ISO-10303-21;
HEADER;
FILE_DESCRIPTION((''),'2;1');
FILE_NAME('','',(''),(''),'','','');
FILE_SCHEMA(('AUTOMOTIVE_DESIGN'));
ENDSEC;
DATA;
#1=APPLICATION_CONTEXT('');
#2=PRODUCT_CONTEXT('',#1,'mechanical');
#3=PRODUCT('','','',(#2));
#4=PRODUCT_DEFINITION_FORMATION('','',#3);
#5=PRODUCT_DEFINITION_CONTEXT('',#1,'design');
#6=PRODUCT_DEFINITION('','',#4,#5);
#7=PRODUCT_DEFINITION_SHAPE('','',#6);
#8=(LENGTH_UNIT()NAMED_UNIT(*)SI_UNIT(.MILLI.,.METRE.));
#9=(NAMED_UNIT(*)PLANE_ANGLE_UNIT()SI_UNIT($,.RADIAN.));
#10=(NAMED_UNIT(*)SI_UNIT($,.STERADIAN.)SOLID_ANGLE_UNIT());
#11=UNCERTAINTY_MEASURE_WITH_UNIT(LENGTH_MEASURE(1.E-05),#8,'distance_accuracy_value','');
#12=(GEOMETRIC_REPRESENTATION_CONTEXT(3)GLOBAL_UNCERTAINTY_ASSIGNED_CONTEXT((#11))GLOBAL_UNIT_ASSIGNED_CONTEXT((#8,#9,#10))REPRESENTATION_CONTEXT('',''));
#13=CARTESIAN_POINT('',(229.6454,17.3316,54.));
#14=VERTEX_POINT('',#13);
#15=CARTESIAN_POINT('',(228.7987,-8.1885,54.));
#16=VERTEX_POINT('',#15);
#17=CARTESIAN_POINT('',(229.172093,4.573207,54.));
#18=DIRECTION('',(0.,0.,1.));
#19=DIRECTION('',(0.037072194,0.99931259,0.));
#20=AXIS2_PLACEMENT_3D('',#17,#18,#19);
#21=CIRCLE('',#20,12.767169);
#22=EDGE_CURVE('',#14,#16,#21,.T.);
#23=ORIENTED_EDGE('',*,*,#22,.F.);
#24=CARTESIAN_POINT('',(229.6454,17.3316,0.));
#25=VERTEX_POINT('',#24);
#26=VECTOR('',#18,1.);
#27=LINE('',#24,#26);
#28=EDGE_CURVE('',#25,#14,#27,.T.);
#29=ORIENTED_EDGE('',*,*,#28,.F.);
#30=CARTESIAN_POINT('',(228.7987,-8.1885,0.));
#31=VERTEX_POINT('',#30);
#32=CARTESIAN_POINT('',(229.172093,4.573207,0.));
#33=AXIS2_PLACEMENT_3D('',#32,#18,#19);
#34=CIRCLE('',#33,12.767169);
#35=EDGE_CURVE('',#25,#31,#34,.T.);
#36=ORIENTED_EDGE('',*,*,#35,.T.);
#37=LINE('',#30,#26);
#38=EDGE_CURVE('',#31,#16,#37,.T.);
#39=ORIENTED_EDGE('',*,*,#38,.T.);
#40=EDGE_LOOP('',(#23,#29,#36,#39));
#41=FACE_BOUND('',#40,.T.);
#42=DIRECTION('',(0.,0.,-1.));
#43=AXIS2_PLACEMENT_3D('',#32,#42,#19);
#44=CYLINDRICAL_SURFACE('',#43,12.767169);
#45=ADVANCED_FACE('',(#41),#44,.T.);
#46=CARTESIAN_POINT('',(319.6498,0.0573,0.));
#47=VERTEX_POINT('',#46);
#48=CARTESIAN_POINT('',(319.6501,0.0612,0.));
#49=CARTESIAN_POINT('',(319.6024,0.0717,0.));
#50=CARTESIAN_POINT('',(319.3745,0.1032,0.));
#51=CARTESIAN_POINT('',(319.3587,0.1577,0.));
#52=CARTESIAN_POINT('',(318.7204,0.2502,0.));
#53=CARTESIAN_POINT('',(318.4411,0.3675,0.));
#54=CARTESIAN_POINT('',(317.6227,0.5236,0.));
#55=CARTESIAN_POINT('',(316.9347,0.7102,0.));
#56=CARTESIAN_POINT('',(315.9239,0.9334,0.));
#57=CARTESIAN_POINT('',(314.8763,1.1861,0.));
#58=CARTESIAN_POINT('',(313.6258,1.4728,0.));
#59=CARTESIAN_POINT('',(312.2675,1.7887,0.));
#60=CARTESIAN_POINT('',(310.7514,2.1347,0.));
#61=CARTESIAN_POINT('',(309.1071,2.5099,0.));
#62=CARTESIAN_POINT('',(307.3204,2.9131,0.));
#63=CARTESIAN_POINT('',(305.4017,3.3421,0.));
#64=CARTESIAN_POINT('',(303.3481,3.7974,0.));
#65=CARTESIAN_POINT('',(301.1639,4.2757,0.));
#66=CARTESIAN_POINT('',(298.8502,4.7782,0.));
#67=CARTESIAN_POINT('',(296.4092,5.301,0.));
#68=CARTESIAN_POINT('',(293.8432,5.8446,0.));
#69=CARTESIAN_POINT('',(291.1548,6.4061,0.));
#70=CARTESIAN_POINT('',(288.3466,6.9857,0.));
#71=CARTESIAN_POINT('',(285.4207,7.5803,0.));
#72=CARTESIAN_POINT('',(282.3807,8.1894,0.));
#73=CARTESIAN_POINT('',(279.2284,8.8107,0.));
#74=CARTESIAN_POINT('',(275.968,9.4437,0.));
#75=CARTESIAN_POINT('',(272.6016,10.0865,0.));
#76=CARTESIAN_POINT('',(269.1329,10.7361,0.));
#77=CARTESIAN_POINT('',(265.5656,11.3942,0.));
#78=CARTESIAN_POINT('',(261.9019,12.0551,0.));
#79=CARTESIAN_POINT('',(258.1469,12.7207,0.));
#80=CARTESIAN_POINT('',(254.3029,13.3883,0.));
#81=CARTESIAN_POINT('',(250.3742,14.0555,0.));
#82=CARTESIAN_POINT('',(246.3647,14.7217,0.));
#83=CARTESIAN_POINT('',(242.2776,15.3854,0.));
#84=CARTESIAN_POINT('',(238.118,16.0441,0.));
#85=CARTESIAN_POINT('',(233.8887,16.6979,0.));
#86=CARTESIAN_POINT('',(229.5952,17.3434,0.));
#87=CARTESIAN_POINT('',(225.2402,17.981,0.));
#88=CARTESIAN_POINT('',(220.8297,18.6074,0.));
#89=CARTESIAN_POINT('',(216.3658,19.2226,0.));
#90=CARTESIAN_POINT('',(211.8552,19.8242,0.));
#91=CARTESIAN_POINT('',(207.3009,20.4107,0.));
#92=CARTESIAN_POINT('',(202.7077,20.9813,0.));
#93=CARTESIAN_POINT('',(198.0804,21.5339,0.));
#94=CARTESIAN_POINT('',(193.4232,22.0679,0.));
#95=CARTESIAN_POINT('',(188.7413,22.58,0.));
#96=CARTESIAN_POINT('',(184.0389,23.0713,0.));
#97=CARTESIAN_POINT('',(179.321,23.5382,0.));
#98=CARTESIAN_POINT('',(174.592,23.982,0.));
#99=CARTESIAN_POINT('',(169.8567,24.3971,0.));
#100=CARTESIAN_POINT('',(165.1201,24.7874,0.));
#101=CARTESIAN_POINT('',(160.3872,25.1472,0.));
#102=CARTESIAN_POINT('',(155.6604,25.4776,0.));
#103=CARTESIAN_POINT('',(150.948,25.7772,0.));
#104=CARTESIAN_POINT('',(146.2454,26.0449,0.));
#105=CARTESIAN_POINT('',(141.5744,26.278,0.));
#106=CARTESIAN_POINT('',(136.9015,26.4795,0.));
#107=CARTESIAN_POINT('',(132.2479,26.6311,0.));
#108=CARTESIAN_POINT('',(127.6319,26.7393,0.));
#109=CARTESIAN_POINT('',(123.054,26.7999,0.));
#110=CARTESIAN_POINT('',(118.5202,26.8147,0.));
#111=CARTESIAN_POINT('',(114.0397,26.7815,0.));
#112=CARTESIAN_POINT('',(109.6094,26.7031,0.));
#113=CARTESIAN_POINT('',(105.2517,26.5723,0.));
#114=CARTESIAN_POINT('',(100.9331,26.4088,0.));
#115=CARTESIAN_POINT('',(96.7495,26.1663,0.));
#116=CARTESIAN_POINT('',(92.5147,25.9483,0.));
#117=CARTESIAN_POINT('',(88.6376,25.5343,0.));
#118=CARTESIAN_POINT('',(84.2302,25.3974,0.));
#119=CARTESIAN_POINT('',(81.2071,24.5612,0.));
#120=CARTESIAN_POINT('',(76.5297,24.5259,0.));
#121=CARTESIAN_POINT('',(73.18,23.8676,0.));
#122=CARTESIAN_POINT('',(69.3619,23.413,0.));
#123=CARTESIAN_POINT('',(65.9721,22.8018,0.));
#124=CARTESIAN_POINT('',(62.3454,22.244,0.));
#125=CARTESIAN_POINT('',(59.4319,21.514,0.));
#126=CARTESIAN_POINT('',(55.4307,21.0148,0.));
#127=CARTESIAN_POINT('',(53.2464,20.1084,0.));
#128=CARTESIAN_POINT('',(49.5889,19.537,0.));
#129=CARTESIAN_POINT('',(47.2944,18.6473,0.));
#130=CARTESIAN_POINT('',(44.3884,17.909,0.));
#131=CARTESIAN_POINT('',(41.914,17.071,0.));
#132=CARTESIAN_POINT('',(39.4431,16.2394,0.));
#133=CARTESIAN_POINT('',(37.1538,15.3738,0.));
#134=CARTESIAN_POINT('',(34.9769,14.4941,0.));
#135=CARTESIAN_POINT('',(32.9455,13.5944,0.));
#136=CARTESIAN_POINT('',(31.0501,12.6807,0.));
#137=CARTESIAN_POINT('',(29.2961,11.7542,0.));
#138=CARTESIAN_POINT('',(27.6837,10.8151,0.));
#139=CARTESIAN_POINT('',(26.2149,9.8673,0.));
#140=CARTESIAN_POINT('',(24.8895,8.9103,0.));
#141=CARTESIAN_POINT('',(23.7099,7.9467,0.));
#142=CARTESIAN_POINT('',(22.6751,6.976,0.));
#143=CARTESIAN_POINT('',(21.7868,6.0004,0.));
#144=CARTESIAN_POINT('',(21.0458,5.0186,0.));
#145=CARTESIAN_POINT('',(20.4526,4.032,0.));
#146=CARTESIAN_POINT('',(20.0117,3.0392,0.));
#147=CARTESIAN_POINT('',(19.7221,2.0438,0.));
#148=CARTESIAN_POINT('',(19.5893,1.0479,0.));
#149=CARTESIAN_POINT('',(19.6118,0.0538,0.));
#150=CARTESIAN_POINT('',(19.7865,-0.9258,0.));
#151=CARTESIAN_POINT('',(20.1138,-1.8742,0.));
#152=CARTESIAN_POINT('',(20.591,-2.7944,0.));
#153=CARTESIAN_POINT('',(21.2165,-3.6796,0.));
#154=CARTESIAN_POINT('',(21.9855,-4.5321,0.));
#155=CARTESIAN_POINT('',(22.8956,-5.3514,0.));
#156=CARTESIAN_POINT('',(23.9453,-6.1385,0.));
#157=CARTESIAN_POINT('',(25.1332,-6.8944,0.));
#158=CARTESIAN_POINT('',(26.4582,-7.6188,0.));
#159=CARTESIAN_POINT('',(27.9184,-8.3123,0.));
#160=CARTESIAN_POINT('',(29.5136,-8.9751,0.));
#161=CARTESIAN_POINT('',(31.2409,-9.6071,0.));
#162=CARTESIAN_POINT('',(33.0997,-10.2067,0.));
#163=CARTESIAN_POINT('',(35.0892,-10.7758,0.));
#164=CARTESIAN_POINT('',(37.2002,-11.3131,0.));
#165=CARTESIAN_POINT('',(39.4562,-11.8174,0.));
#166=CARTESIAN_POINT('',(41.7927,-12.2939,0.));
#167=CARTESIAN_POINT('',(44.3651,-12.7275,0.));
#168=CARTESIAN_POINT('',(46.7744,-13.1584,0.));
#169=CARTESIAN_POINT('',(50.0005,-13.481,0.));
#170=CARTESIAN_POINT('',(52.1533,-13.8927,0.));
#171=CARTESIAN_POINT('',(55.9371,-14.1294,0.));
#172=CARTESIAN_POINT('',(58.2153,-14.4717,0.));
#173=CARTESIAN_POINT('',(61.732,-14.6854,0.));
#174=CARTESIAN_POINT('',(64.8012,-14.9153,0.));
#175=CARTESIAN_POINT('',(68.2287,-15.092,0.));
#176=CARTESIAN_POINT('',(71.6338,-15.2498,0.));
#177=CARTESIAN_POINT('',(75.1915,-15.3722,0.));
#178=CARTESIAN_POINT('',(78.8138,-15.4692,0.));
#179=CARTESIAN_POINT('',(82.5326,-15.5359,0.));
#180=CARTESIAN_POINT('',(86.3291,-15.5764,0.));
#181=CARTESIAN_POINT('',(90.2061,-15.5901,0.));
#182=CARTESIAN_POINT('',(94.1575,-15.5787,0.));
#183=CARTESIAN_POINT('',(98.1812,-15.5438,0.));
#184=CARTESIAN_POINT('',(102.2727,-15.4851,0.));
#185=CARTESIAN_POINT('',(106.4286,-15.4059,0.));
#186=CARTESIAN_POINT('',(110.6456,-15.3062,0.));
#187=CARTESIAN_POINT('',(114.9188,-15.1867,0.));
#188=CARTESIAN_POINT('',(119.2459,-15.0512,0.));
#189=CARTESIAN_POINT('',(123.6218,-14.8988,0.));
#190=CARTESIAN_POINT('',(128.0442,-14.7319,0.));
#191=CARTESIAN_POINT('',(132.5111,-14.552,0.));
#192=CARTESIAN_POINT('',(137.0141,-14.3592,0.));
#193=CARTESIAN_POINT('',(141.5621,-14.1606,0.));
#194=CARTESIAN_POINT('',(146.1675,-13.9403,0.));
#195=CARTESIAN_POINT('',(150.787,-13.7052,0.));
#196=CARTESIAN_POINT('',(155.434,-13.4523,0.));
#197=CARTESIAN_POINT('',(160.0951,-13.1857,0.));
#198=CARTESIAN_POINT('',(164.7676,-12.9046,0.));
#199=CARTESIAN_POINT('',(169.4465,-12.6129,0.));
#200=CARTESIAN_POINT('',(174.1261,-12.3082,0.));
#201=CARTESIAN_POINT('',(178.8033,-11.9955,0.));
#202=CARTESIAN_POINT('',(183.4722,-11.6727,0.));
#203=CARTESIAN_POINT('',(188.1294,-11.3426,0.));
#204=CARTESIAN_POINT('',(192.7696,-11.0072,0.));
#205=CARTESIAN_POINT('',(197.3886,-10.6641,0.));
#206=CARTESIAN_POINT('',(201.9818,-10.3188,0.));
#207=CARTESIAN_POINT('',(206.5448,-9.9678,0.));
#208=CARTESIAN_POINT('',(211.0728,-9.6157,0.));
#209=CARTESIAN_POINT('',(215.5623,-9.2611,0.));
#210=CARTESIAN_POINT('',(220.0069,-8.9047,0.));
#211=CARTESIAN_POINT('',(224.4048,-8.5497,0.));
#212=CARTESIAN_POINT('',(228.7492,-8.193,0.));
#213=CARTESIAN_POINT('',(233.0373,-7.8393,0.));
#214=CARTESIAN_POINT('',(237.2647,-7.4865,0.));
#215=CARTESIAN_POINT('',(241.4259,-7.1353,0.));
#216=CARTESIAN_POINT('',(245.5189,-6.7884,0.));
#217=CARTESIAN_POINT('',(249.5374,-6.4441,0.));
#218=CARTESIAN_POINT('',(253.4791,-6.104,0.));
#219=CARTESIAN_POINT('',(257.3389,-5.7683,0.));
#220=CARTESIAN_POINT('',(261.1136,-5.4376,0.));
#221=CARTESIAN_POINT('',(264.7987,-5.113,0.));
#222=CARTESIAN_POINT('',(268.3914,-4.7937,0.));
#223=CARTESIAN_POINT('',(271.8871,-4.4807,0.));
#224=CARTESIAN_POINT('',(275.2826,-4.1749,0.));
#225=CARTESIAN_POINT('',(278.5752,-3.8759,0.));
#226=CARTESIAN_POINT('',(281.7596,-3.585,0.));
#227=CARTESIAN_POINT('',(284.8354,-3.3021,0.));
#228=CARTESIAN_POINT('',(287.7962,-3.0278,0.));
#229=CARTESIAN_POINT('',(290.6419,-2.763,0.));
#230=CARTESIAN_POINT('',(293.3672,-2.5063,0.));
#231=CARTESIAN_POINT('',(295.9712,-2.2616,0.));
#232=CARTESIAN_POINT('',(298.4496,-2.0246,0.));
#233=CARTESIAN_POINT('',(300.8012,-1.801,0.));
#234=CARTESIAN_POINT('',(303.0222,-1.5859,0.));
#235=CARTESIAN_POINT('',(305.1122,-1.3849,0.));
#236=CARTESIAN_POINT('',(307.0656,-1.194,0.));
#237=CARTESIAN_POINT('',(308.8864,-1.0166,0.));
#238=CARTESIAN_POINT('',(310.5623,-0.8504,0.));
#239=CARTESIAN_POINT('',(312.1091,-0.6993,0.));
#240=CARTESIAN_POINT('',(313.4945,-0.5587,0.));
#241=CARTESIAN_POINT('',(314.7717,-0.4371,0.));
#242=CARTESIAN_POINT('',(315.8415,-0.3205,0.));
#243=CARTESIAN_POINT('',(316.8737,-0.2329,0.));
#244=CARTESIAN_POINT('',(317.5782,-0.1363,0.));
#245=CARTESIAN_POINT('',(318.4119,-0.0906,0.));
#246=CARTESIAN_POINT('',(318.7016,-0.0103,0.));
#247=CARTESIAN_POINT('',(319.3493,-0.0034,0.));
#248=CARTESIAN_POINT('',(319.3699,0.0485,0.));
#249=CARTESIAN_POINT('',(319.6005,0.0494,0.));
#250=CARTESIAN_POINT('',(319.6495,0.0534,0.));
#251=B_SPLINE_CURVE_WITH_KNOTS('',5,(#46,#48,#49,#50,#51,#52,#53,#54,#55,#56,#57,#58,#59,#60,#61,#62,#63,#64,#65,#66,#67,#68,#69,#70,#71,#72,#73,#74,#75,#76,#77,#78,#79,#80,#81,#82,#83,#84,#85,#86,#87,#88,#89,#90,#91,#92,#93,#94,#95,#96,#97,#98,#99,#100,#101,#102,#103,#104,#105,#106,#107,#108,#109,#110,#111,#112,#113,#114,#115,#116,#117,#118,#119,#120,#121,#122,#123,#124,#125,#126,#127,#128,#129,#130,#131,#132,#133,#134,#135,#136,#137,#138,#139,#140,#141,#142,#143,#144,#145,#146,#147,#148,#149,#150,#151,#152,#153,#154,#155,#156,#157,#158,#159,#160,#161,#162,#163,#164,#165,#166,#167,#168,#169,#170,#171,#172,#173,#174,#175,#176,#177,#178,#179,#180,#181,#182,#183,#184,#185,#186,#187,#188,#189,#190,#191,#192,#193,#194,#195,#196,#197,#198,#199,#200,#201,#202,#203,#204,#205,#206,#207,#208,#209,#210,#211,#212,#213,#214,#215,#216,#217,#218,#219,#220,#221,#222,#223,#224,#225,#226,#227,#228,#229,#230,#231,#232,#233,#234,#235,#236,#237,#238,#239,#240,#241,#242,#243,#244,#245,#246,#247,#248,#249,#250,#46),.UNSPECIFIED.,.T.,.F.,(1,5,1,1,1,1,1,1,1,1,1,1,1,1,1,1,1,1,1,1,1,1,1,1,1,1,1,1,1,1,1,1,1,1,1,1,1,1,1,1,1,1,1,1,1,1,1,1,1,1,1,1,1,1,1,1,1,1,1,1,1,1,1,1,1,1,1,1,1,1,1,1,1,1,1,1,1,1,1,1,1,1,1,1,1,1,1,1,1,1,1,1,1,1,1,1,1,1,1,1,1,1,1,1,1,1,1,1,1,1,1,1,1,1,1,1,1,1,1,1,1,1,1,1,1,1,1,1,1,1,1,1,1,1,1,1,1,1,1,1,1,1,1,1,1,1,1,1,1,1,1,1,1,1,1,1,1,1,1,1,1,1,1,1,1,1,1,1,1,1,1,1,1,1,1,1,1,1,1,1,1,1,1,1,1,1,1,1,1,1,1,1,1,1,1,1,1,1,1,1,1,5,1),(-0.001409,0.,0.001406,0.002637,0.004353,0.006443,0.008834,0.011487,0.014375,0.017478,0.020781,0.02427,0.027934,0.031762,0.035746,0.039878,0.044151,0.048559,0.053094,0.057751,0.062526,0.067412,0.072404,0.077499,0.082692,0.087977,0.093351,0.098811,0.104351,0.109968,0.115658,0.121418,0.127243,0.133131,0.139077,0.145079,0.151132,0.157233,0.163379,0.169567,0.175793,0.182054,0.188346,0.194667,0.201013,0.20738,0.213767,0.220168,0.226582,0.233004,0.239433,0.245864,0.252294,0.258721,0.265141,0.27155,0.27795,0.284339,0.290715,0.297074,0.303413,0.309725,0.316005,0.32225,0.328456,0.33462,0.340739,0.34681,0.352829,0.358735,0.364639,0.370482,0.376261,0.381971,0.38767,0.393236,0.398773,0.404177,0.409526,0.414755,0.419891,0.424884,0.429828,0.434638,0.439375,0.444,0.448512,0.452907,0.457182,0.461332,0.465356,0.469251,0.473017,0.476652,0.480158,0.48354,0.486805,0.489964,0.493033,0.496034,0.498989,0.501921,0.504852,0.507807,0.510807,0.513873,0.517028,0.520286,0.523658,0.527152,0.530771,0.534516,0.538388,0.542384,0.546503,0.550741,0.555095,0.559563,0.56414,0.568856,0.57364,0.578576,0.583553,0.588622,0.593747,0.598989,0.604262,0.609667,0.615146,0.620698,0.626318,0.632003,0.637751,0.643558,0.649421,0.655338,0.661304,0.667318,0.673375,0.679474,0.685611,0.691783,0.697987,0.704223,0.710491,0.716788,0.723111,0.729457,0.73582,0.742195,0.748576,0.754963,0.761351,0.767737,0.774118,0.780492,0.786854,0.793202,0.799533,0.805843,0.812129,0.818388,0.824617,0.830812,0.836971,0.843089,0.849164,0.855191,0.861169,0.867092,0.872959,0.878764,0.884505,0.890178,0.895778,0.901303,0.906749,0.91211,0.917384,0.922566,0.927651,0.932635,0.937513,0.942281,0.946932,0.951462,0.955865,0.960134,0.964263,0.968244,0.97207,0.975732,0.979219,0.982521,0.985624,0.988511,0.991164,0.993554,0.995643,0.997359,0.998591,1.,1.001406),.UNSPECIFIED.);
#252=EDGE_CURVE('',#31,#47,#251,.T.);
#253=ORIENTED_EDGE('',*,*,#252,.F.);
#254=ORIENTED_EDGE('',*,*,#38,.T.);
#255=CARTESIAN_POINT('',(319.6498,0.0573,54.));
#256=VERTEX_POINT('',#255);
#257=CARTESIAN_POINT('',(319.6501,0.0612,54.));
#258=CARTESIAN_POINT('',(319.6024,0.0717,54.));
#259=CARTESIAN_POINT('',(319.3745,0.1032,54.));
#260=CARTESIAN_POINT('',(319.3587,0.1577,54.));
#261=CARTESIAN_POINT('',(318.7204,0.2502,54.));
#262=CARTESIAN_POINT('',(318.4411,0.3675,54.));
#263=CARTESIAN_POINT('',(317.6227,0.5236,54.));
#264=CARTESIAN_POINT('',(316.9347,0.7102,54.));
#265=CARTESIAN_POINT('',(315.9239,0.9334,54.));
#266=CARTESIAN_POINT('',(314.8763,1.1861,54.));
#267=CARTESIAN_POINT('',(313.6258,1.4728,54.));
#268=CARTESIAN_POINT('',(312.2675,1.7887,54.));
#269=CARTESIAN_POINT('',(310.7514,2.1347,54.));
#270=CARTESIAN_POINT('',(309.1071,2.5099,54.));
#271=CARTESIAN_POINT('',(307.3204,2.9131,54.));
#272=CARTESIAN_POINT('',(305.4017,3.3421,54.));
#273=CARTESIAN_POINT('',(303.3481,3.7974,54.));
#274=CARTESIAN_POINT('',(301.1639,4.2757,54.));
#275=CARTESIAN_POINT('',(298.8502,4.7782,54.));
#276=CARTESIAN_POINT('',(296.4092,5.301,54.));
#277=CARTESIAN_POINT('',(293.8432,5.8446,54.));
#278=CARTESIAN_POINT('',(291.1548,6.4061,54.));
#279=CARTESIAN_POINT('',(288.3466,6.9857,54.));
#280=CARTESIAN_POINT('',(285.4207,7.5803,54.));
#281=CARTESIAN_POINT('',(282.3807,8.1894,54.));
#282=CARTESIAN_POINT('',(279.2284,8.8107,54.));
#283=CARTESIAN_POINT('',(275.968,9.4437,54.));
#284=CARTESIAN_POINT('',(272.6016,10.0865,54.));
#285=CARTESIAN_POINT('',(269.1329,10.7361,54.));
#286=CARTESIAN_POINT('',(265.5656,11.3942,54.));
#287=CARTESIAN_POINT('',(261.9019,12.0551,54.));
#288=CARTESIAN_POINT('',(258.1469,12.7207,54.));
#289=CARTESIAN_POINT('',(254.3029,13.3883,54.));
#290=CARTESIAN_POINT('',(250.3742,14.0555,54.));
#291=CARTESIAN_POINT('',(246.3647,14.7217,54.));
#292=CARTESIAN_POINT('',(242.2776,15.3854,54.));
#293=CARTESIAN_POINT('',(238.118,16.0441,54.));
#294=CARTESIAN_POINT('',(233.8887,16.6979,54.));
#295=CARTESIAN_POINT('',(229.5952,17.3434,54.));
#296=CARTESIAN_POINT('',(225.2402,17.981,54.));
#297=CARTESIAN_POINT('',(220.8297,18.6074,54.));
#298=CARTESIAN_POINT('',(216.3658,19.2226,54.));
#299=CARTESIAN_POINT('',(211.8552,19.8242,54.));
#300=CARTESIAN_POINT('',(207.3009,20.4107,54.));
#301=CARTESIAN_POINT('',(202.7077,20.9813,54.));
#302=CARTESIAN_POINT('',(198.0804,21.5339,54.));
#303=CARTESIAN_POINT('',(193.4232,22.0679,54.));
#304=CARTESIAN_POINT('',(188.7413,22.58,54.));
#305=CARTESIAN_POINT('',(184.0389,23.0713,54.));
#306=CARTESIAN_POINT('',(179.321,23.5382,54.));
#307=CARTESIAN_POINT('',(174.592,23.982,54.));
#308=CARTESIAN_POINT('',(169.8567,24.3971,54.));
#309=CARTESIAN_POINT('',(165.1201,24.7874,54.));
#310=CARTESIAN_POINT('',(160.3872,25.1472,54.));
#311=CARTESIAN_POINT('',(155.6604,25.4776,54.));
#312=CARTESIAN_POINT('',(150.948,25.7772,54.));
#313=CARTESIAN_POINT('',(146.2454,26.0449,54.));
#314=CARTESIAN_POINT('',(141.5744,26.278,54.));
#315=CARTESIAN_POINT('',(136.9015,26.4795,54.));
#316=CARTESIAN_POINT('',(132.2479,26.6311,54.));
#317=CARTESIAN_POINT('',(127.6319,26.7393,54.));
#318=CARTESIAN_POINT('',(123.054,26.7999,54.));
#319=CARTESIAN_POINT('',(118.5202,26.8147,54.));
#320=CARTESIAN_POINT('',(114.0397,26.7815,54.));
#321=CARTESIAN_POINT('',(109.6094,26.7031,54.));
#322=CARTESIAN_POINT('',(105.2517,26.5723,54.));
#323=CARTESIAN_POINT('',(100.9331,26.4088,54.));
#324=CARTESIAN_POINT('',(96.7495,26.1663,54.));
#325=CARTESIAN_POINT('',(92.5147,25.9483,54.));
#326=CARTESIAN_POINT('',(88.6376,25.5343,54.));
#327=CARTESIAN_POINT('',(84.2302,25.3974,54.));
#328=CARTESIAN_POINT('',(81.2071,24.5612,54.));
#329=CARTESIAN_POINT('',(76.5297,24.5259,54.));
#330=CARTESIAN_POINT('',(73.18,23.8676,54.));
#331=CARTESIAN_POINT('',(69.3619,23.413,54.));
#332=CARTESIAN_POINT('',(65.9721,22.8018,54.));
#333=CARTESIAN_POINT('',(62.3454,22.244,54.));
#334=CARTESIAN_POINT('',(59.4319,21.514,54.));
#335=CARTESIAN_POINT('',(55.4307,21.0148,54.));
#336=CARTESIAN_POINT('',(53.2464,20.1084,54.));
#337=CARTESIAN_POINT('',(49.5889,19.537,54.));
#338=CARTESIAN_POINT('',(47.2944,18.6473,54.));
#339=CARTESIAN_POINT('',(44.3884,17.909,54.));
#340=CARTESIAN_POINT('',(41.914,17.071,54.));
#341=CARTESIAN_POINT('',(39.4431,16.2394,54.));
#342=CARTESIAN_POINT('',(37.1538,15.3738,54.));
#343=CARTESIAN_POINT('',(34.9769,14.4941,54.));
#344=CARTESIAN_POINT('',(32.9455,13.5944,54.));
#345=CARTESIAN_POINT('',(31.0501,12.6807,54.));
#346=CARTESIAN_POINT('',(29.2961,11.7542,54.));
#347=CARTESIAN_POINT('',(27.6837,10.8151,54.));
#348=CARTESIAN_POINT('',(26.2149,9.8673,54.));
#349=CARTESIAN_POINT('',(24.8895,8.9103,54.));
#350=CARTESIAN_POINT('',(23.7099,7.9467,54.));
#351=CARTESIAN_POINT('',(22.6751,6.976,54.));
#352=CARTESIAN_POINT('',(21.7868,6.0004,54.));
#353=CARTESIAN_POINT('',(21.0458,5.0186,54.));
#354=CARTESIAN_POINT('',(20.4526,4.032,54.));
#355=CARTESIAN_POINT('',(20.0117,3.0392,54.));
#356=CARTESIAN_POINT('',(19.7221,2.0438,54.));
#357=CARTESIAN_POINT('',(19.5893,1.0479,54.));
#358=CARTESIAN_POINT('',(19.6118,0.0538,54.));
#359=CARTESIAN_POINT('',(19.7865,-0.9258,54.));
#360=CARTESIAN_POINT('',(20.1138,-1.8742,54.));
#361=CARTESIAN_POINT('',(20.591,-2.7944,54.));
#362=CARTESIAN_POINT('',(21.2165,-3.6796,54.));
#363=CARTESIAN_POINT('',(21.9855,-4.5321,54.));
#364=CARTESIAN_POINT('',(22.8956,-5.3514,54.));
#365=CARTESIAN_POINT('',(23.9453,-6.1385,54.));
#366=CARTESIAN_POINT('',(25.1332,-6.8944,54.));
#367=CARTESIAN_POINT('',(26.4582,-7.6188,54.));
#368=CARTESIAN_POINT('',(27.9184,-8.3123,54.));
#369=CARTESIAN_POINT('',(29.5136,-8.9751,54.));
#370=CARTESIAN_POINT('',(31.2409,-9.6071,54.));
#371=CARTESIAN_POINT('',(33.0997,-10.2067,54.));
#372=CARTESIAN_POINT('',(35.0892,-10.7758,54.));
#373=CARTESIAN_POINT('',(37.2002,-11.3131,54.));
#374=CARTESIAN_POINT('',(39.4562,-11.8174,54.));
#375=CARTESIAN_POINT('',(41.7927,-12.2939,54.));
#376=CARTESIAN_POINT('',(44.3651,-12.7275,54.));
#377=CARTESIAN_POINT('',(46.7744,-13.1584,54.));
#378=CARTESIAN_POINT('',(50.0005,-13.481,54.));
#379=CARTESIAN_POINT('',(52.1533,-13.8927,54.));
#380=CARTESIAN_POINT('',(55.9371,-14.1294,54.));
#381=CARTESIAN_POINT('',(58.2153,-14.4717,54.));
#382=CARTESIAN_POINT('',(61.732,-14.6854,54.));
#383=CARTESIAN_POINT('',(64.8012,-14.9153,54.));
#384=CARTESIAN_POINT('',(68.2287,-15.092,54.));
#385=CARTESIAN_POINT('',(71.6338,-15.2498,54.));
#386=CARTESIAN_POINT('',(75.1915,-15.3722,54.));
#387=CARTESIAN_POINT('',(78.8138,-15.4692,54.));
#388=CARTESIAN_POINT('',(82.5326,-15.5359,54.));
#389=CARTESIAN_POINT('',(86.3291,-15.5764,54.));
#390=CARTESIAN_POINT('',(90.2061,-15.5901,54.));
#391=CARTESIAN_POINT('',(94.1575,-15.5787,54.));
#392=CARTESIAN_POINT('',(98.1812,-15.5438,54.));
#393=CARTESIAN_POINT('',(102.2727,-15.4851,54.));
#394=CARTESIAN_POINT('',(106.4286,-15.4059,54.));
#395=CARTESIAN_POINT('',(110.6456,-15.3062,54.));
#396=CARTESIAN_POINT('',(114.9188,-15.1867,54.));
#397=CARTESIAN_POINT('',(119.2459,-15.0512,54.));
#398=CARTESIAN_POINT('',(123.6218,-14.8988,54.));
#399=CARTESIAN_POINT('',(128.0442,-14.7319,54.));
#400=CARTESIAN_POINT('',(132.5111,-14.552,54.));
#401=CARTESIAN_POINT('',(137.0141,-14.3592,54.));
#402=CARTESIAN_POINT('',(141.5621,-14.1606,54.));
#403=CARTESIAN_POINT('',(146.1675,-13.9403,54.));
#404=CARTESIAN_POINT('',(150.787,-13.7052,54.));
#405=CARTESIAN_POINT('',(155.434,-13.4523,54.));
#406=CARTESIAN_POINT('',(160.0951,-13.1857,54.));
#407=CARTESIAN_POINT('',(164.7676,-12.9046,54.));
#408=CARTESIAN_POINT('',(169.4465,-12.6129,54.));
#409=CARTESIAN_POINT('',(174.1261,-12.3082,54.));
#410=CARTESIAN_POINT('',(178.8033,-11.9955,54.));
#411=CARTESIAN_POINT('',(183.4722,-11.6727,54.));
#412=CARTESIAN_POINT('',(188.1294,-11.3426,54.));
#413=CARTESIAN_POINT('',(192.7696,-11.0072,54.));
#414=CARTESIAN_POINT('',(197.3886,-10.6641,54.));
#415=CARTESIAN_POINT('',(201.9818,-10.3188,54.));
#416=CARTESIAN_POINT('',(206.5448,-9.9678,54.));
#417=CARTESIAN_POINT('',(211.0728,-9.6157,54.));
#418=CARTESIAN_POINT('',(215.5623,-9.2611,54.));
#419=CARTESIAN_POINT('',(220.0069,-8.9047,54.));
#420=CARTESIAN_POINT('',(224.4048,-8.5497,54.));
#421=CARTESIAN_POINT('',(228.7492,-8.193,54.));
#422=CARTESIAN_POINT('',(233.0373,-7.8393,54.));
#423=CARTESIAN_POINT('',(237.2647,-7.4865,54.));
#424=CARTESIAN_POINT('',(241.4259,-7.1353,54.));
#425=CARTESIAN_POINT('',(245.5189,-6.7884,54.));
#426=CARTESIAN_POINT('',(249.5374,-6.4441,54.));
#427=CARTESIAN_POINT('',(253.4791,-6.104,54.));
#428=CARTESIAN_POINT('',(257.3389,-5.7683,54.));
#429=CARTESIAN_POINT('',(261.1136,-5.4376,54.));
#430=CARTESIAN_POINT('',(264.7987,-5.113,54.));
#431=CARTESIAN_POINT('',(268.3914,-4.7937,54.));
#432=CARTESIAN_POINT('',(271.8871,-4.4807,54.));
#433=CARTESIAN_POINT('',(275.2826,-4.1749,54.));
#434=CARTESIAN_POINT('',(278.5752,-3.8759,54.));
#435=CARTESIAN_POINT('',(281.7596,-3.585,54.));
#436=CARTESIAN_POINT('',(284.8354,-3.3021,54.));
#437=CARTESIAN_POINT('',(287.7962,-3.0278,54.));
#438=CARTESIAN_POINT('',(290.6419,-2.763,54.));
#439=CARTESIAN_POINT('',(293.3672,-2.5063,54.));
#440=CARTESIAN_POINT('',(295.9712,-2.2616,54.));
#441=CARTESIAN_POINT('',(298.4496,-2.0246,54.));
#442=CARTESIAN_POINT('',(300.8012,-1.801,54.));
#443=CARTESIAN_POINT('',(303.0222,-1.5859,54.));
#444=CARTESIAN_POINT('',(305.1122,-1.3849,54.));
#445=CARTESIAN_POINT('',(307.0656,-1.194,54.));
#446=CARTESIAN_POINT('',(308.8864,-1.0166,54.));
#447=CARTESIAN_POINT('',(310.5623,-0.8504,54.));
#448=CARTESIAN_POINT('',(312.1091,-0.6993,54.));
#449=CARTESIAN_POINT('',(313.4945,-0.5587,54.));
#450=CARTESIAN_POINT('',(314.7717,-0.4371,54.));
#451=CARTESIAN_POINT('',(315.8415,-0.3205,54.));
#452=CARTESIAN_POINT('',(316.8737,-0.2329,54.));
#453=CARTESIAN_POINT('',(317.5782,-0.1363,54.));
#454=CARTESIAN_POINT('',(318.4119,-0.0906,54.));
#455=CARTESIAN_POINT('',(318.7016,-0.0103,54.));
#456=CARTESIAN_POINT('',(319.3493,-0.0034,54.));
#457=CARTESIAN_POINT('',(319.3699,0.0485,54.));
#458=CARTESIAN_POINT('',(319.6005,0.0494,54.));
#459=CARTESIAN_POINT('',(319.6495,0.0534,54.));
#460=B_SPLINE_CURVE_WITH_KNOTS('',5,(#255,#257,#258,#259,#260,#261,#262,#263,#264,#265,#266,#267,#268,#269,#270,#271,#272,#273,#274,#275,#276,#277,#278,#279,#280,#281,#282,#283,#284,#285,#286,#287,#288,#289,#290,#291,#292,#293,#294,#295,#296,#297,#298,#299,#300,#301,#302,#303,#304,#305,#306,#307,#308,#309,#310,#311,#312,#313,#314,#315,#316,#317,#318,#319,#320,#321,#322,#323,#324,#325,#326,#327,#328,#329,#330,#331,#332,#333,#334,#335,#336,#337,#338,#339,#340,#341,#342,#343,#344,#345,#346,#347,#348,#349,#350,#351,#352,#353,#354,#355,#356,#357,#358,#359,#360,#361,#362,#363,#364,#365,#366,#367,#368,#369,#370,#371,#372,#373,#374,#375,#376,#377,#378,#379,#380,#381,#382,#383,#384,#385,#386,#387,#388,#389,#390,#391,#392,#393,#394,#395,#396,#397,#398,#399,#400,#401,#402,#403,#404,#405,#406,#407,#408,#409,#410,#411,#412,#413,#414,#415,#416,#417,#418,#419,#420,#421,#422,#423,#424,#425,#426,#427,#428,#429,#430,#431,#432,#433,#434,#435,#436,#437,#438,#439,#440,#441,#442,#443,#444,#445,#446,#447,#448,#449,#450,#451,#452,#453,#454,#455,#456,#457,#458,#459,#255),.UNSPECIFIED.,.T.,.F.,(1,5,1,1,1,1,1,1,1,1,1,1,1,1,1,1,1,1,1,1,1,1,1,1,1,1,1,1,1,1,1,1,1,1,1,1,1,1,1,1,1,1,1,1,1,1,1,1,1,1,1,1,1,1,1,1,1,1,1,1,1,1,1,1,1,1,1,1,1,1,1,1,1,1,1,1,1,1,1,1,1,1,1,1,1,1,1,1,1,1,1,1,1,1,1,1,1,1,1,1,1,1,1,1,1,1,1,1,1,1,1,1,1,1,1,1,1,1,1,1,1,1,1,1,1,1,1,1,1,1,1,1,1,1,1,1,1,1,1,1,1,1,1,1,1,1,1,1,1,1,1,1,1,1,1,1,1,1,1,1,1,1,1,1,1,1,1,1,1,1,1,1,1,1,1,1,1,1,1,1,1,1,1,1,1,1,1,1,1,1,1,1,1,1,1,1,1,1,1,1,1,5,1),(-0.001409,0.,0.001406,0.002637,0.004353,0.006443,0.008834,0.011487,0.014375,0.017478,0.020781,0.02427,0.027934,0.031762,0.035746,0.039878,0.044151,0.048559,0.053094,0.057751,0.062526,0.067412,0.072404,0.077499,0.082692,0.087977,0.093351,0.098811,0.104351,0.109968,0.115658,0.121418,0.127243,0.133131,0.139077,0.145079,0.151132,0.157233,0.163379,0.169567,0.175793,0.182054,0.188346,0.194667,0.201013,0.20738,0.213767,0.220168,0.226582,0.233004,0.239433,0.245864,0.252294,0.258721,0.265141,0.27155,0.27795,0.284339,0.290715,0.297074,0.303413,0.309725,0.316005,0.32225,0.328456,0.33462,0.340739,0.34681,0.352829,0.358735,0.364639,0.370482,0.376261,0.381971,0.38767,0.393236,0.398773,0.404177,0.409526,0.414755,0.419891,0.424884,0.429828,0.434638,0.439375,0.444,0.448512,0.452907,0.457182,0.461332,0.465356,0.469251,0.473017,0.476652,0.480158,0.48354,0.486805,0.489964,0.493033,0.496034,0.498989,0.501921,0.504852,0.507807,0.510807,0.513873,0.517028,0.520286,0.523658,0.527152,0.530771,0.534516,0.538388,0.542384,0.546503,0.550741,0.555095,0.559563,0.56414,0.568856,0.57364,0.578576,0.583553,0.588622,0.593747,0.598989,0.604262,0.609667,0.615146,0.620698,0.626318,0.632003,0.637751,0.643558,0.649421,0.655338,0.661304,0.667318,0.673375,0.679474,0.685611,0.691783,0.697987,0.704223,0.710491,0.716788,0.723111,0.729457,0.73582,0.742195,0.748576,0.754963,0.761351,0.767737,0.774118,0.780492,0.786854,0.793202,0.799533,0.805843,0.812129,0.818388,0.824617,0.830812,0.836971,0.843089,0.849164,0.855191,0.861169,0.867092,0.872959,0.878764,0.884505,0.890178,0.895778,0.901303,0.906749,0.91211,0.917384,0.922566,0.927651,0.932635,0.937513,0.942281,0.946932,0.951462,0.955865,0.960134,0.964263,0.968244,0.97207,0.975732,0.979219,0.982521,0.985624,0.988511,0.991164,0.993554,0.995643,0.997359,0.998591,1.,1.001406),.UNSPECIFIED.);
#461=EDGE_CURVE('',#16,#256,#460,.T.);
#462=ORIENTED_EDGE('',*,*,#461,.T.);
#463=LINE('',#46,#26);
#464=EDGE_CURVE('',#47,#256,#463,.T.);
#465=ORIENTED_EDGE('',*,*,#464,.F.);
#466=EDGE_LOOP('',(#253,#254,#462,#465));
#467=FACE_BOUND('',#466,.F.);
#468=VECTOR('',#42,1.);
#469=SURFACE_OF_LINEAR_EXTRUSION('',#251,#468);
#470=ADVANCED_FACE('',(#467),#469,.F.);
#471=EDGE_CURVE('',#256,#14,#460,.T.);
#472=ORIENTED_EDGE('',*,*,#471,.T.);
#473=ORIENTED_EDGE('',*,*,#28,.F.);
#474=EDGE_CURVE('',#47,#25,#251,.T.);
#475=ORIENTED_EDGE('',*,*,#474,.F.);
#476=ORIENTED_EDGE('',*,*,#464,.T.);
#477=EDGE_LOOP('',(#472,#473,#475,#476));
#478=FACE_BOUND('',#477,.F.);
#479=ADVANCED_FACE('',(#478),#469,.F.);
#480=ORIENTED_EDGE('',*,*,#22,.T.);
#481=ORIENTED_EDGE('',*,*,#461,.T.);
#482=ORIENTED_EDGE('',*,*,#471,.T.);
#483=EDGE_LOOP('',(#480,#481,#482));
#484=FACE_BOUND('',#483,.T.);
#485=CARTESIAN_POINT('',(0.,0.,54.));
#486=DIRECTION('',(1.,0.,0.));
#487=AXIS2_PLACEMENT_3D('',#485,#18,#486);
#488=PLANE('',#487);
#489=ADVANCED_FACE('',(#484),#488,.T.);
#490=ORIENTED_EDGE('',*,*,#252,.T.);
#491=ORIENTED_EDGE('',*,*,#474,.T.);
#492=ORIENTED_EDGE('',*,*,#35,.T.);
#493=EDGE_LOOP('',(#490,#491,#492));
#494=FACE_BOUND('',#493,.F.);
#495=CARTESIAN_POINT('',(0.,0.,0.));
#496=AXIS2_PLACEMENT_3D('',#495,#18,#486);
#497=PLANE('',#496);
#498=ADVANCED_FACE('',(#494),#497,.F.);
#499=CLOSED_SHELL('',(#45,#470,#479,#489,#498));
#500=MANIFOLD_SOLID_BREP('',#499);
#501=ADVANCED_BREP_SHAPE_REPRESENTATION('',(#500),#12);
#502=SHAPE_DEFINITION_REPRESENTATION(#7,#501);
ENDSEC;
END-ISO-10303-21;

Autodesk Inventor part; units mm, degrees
ref_plane "YZ Plane" through (0, 0, 0) normal (1, 0, 0) x (0, 1, 0)
ref_plane "XZ Plane" through (0, 0, 0) normal (0, 1, 0) x (-1, 0, 0)
ref_plane "XY Plane" through (0, 0, 0) normal (0, 0, 1) x (1, 0, 0)
sketch "Sketch2" plane through (0, 0, 0) normal (0, 0, 1) x (1, 0, 0)
  spline S0 degree 5 poles (319.6498, 0.0573) (319.6501, 0.0612) (319.6024, 0.0717) (319.3745, 0.1032) (319.3587, 0.1577) (318.7204, 0.2502) (318.4411, 0.3675) (317.6227, 0.5236) (316.9347, 0.7102) (315.9239, 0.9334) (314.8763, 1.1861) (313.6258, 1.4728) (312.2675, 1.7887) (310.7514, 2.1347) (309.1071, 2.5099) (307.3204, 2.9131) (305.4017, 3.3421) (303.3481, 3.7974) (301.1639, 4.2757) (298.8502, 4.7782) (296.4092, 5.301) (293.8432, 5.8446) (291.1548, 6.4061) (288.3466, 6.9857) (285.4207, 7.5803) (282.3807, 8.1894) (279.2284, 8.8107) (275.968, 9.4437) (272.6016, 10.0865) (269.1329, 10.7361) (265.5656, 11.3942) (261.9019, 12.0551) (258.1469, 12.7207) (254.3029, 13.3883) (250.3742, 14.0555) (246.3647, 14.7217) (242.2776, 15.3854) (238.118, 16.0441) (233.8887, 16.6979) (229.5952, 17.3434) (225.2402, 17.981) (220.8297, 18.6074) (216.3658, 19.2226) (211.8552, 19.8242) (207.3009, 20.4107) (202.7077, 20.9813) (198.0804, 21.5339) (193.4232, 22.0679) (188.7413, 22.58) (184.0389, 23.0713) (179.321, 23.5382) (174.592, 23.982) (169.8567, 24.3971) (165.1201, 24.7874) (160.3872, 25.1472) (155.6604, 25.4776) (150.948, 25.7772) (146.2454, 26.0449) (141.5744, 26.278) (136.9015, 26.4795) (132.2479, 26.6311) (127.6319, 26.7393) (123.054, 26.7999) (118.5202, 26.8147) (114.0397, 26.7815) (109.6094, 26.7031) (105.2517, 26.5723) (100.9331, 26.4088) (96.7495, 26.1663) (92.5147, 25.9483) (88.6376, 25.5343) (84.2302, 25.3974) (81.2071, 24.5612) (76.5297, 24.5259) (73.18, 23.8676) (69.3619, 23.413) (65.9721, 22.8018) (62.3454, 22.244) (59.4319, 21.514) (55.4307, 21.0148) (53.2464, 20.1084) (49.5889, 19.537) (47.2944, 18.6473) (44.3884, 17.909) (41.914, 17.071) (39.4431, 16.2394) (37.1538, 15.3738) (34.9769, 14.4941) (32.9455, 13.5944) (31.0501, 12.6807) (29.2961, 11.7542) (27.6837, 10.8151) (26.2149, 9.8673) (24.8895, 8.9103) (23.7099, 7.9467) (22.6751, 6.976) (21.7868, 6.0004) (21.0458, 5.0186) (20.4526, 4.032) (20.0117, 3.0392) (19.7221, 2.0438) (19.5893, 1.0479) (19.6118, 0.0538) (19.7865, -0.9258) (20.1138, -1.8742) (20.591, -2.7944) (21.2165, -3.6796) (21.9855, -4.5321) (22.8956, -5.3514) (23.9453, -6.1385) (25.1332, -6.8944) (26.4582, -7.6188) (27.9184, -8.3123) (29.5136, -8.9751) (31.2409, -9.6071) (33.0997, -10.2067) (35.0892, -10.7758) (37.2002, -11.3131) (39.4562, -11.8174) (41.7927, -12.2939) (44.3651, -12.7275) (46.7744, -13.1584) (50.0005, -13.481) (52.1533, -13.8927) (55.9371, -14.1294) (58.2153, -14.4717) (61.732, -14.6854) (64.8012, -14.9153) (68.2287, -15.092) (71.6338, -15.2498) (75.1915, -15.3722) (78.8138, -15.4692) (82.5326, -15.5359) (86.3291, -15.5764) (90.2061, -15.5901) (94.1575, -15.5787) (98.1812, -15.5438) (102.2727, -15.4851) (106.4286, -15.4059) (110.6456, -15.3062) (114.9188, -15.1867) (119.2459, -15.0512) (123.6218, -14.8988) (128.0442, -14.7319) (132.5111, -14.552) (137.0141, -14.3592) (141.5621, -14.1606) (146.1675, -13.9403) (150.787, -13.7052) (155.434, -13.4523) (160.0951, -13.1857) (164.7676, -12.9046) (169.4465, -12.6129) (174.1261, -12.3082) (178.8033, -11.9955) (183.4722, -11.6727) (188.1294, -11.3426) (192.7696, -11.0072) (197.3886, -10.6641) (201.9818, -10.3188) (206.5448, -9.9678) (211.0728, -9.6157) (215.5623, -9.2611) (220.0069, -8.9047) (224.4048, -8.5497) (228.7492, -8.193) (233.0373, -7.8393) (237.2647, -7.4865) (241.4259, -7.1353) (245.5189, -6.7884) (249.5374, -6.4441) (253.4791, -6.104) (257.3389, -5.7683) (261.1136, -5.4376) (264.7987, -5.113) (268.3914, -4.7937) (271.8871, -4.4807) (275.2826, -4.1749) (278.5752, -3.8759) (281.7596, -3.585) (284.8354, -3.3021) (287.7962, -3.0278) (290.6419, -2.763) (293.3672, -2.5063) (295.9712, -2.2616) (298.4496, -2.0246) (300.8012, -1.801) (303.0222, -1.5859) (305.1122, -1.3849) (307.0656, -1.194) (308.8864, -1.0166) (310.5623, -0.8504) (312.1091, -0.6993) (313.4945, -0.5587) (314.7717, -0.4371) (315.8415, -0.3205) (316.8737, -0.2329) (317.5782, -0.1363) (318.4119, -0.0906) (318.7016, -0.0103) (319.3493, -0.0034) (319.3699, 0.0485) (319.6005, 0.0494) (319.6495, 0.0534) (319.6498, 0.0573) knots 0 0 0 0 0 0 0.001406 0.002637 0.004353 0.006443 0.008834 0.011487 0.014375 0.017478 0.020781 0.02427 0.027934 0.031762 0.035746 0.039878 0.044151 0.048559 0.053094 0.057751 0.062526 0.067412 0.072404 0.077499 0.082692 0.087977 0.093351 0.098811 0.104351 0.109968 0.115658 0.121418 0.127243 0.133131 0.139077 0.145079 0.151132 0.157233 0.163379 0.169567 0.175793 0.182054 0.188346 0.194667 0.201013 0.20738 0.213767 0.220168 0.226582 0.233004 0.239433 0.245864 0.252294 0.258721 0.265141 0.27155 0.27795 0.284339 0.290715 0.297074 0.303413 0.309725 0.316005 0.32225 0.328456 0.33462 0.340739 0.34681 0.352829 0.358735 0.364639 0.370482 0.376261 0.381971 0.38767 0.393236 0.398773 0.404177 0.409526 0.414755 0.419891 0.424884 0.429828 0.434638 0.439375 0.444 0.448512 0.452907 0.457182 0.461332 0.465356 0.469251 0.473017 0.476652 0.480158 0.48354 0.486805 0.489964 0.493033 0.496034 0.498989 0.501921 0.504852 0.507807 0.510807 0.513873 0.517028 0.520286 0.523658 0.527152 0.530771 0.534516 0.538388 0.542384 0.546503 0.550741 0.555095 0.559563 0.56414 0.568856 0.57364 0.578576 0.583553 0.588622 0.593747 0.598989 0.604262 0.609667 0.615146 0.620698 0.626318 0.632003 0.637751 0.643558 0.649421 0.655338 0.661304 0.667318 0.673375 0.679474 0.685611 0.691783 0.697987 0.704223 0.710491 0.716788 0.723111 0.729457 0.73582 0.742195 0.748576 0.754963 0.761351 0.767737 0.774118 0.780492 0.786854 0.793202 0.799533 0.805843 0.812129 0.818388 0.824617 0.830812 0.836971 0.843089 0.849164 0.855191 0.861169 0.867092 0.872959 0.878764 0.884505 0.890178 0.895778 0.901303 0.906749 0.91211 0.917384 0.922566 0.927651 0.932635 0.937513 0.942281 0.946932 0.951462 0.955865 0.960134 0.964263 0.968244 0.97207 0.975732 0.979219 0.982521 0.985624 0.988511 0.991164 0.993554 0.995643 0.997359 0.998591 1 1 1 1 1 1
  circle A0 centre (83.0595, 4.5678) radius 11.5675
  line L0 (83.0595, 4.5678) -> (83.0595, 25.0384) construction
  line L1 (83.0595, 4.5678) -> (209.6498, 4.5678) construction
  line L2 (319.6498, 0.0573) -> (219.6498, 0.0573) construction
  line L3 (219.6499, 18.7671) -> (219.6499, -8.9327) construction
  line L4 (28.0055, 4.5054) -> (28.0055, -2.4946)
  line L5 (19.627, 1.0326) -> (319.6498, 0.0573) construction
  line L6 (49.7105, 14.4213) -> (55.6079, 14.4213)
  line L7 (49.7104, -8.4915) -> (55.6078, -8.4915)
  line L8 (28.0055, 4.5054) -> (49.7105, 14.4213)
  line L9 (28.0055, -2.4946) -> (49.7104, -8.4915)
  line L10 (55.6079, 14.4213) -> (55.6079, 20.8726)
  line L11 (55.6078, -8.4915) -> (55.6078, -14.1513)
  line L12 (108.6496, 16.3299) -> (108.6496, -7.1942)
  line L13 (110.8735, -9.1817) -> (193.8736, 0.1678)
  line L14 (195.6498, 2.1552) -> (195.6498, 6.9805)
  line L15 (193.8736, 8.9679) -> (110.8735, 18.3173)
  arc A1 (110.8735, 18.3173) -> (108.6496, 16.3299) centre (110.6496, 16.3299) ccw
  arc A2 (108.6496, -7.1942) -> (110.8735, -9.1817) centre (110.6496, -7.1942) ccw
  arc A3 (193.8736, 0.1678) -> (195.6498, 2.1552) centre (193.6498, 2.1552) ccw
  arc A4 (195.6498, 6.9805) -> (193.8736, 8.9679) centre (193.6498, 6.9805) ccw
  circle A5 centre (209.6498, 0.0573) radius 6.25
  arc A6 (229.6454, 17.3316) -> (228.7987, -8.1885) centre (229.1721, 4.5732) ccw
  point P0 (0, 0)
  point P1 (319.3573, 0.1272)
  point P2 (318.9918, 0.2142)
  point P3 (318.4802, 0.3354)
  point P4 (317.8238, 0.4911)
  point P5 (317.0222, 0.6801)
  point P6 (316.0769, 0.9024)
  point P7 (314.9885, 1.1568)
  point P8 (313.7582, 1.443)
  point P9 (312.3866, 1.7598)
  point P10 (310.8752, 2.1063)
  point P11 (309.2258, 2.4819)
  point P12 (307.4393, 2.8854)
  point P13 (305.5178, 3.3153)
  point P14 (303.4628, 3.7707)
  point P15 (301.2764, 4.2501)
  point P16 (298.9607, 4.7526)
  point P17 (296.5175, 5.2764)
  point P18 (293.9492, 5.8203)
  point P19 (291.2585, 6.3828)
  point P20 (288.4478, 6.9627)
  point P21 (285.5195, 7.5582)
  point P22 (282.4766, 8.1678)
  point P23 (279.3218, 8.79)
  point P24 (276.0584, 9.4236)
  point P25 (272.6891, 10.0668)
  point P26 (269.2175, 10.7178)
  point P27 (265.6469, 11.3757)
  point P28 (261.9803, 12.0381)
  point P29 (258.2219, 12.7041)
  point P30 (254.3747, 13.3722)
  point P31 (250.4426, 14.0403)
  point P32 (246.4295, 14.7072)
  point P33 (242.339, 15.3714)
  point P34 (238.1756, 16.0311)
  point P35 (233.9428, 16.6851)
  point P36 (225.2869, 17.9694)
  point P37 (220.8723, 18.5967)
  point P38 (216.4049, 19.2123)
  point P39 (211.8901, 19.8144)
  point P40 (207.332, 20.4015)
  point P41 (202.7347, 20.9724)
  point P42 (198.1034, 21.5256)
  point P43 (193.4423, 22.0596)
  point P44 (188.7563, 22.5726)
  point P45 (184.0499, 23.0637)
  point P46 (179.3279, 23.5314)
  point P47 (174.5948, 23.9745)
  point P48 (169.8554, 24.3909)
  point P49 (165.1148, 24.7803)
  point P50 (160.3775, 25.1406)
  point P51 (155.6479, 25.4709)
  point P52 (150.9316, 25.7703)
  point P53 (146.233, 26.0373)
  point P54 (141.557, 26.2707)
  point P55 (136.882, 26.4681)
  point P56 (132.2209, 26.6211)
  point P57 (127.5964, 26.7282)
  point P58 (123.0133, 26.7888)
  point P59 (118.4761, 26.8026)
  point P60 (113.9902, 26.7693)
  point P61 (109.5601, 26.6886)
  point P62 (105.191, 26.5611)
  point P63 (100.8866, 26.3866)
  point P64 (96.6524, 26.1647)
  point P65 (92.4927, 25.8975)
  point P66 (88.4121, 25.5832)
  point P67 (84.4152, 25.2282)
  point P68 (80.9052, 24.7441)
  point P69 (76.6873, 24.3761)
  point P70 (72.9635, 23.8905)
  point P71 (69.3402, 23.3611)
  point P72 (65.8208, 22.7938)
  point P73 (62.4086, 22.1883)
  point P74 (59.107, 21.5464)
  point P75 (52.8493, 20.1606)
  point P76 (49.7105, 19.4213)
  point P77 (47.0737, 18.6507)
  point P78 (44.3741, 17.8542)
  point P79 (41.8034, 17.0322)
  point P80 (39.3638, 16.1874)
  point P81 (37.0583, 15.3213)
  point P82 (34.8884, 14.4363)
  point P83 (32.8568, 13.534)
  point P84 (30.965, 12.6166)
  point P85 (29.2145, 11.686)
  point P86 (27.6071, 10.7437)
  point P87 (26.1443, 9.7921)
  point P88 (24.8269, 8.8324)
  point P89 (23.6566, 7.8664)
  point P90 (22.6336, 6.8953)
  point P91 (21.7591, 5.9209)
  point P92 (21.0334, 4.9441)
  point P93 (20.4571, 3.9661)
  point P94 (20.0308, 2.9875)
  point P95 (19.7539, 2.0098)
  point P96 (19.6496, 0.0573)
  point P97 (19.8205, -0.9033)
  point P98 (20.1376, -1.8357)
  point P99 (20.6002, -2.7402)
  point P100 (21.208, -3.6159)
  point P101 (21.9598, -4.4628)
  point P102 (22.8544, -5.2806)
  point P103 (23.8909, -6.069)
  point P104 (25.0681, -6.8277)
  point P105 (26.3846, -7.5561)
  point P106 (27.8384, -8.2539)
  point P107 (29.4284, -8.9211)
  point P108 (31.1522, -9.5571)
  point P109 (33.0086, -10.1613)
  point P110 (34.9949, -10.734)
  point P111 (37.1093, -11.2746)
  point P112 (39.3497, -11.7828)
  point P113 (41.7134, -12.2586)
  point P114 (44.198, -12.702)
  point P115 (46.8014, -13.1127)
  point P116 (49.7104, -13.4915)
  point P117 (52.3532, -13.8357)
  point P118 (58.3469, -14.4294)
  point P119 (61.5023, -14.6781)
  point P120 (64.7591, -14.8953)
  point P121 (68.1149, -15.0813)
  point P122 (71.5661, -15.237)
  point P123 (75.1094, -15.3627)
  point P124 (78.7418, -15.4596)
  point P125 (82.46, -15.528)
  point P126 (86.2607, -15.5691)
  point P127 (90.14, -15.5838)
  point P128 (94.0946, -15.5733)
  point P129 (98.1212, -15.5388)
  point P130 (102.2159, -15.4812)
  point P131 (106.3751, -15.4023)
  point P132 (110.5952, -15.303)
  point P133 (114.872, -15.1845)
  point P134 (119.2022, -15.0489)
  point P135 (123.5813, -14.8971)
  point P136 (128.006, -14.7306)
  point P137 (132.4718, -14.5509)
  point P138 (136.9748, -14.3598)
  point P139 (141.5285, -14.1576)
  point P140 (146.1365, -13.9383)
  point P141 (150.7679, -13.7022)
  point P142 (155.4191, -13.4499)
  point P143 (160.0853, -13.1829)
  point P144 (164.7617, -12.9024)
  point P145 (169.4444, -12.6099)
  point P146 (174.1283, -12.306)
  point P147 (178.8092, -11.9925)
  point P148 (183.4823, -11.67)
  point P149 (188.1434, -11.34)
  point P150 (192.7877, -11.0037)
  point P151 (197.4106, -10.6614)
  point P152 (202.0079, -10.3149)
  point P153 (206.5747, -9.9645)
  point P154 (211.1069, -9.6117)
  point P155 (215.5999, -9.2568)
  point P156 (220.0489, -8.9007)
  point P157 (224.4503, -8.5446)
  point P158 (233.0906, -7.8339)
  point P159 (237.3214, -7.4808)
  point P160 (241.4866, -7.1298)
  point P161 (245.5828, -6.7821)
  point P162 (249.6052, -6.4377)
  point P163 (253.5502, -6.0972)
  point P164 (257.4136, -5.7612)
  point P165 (261.1915, -5.4303)
  point P166 (264.88, -5.1051)
  point P167 (268.4758, -4.7856)
  point P168 (271.9747, -4.4724)
  point P169 (275.3734, -4.1661)
  point P170 (278.6686, -3.867)
  point P171 (281.8564, -3.5757)
  point P172 (284.9344, -3.2925)
  point P173 (287.8984, -3.018)
  point P174 (290.7463, -2.7525)
  point P175 (293.4745, -2.4963)
  point P176 (296.0806, -2.2503)
  point P177 (298.5616, -2.0142)
  point P178 (300.9151, -1.7892)
  point P179 (303.1387, -1.575)
  point P180 (305.23, -1.3728)
  point P181 (307.1866, -1.1823)
  point P182 (309.007, -1.0041)
  point P183 (310.6885, -0.8385)
  point P184 (312.2302, -0.6861)
  point P185 (313.6297, -0.5472)
  point P186 (314.8861, -0.4221)
  point P187 (315.9976, -0.3108)
  point P188 (316.9636, -0.2139)
  point P189 (317.7826, -0.1314)
  point P190 (318.4537, -0.0636)
  point P191 (318.9766, -0.0108)
  point P192 (319.3503, 0.027)
  point P193 (319.5743, 0.0498)
  point P194 (28.0055, 1.0054)
  point P195 (108.6496, 18.5678)
  point P196 (108.6496, -9.4322)
  point P197 (195.6498, 0.3678)
  point P198 (195.6498, 8.7678)
  point P199 (108.6496, 4.5678)
  dimension "d2" = 300.0001
  dimension "d22" = 100
  dimension "d23" = 7
  dimension "d24" = 5
  dimension "d25" = 5
  dimension "d30" = 28
  dimension "d31" = 8.4
  dimension "d34" = 2
  dimension "d37" = 23.135
  dimension "d43" = 63.4325
  dimension "d44" = 12.5
  dimension "d45" = 110
extrude "Extrusion6" add sketch "Sketch2" along normal blind 54 contours S0 A6
properties part number "3P.05.01.JS.trailing edge 54mm_CPY" material "Polyurethane Foam"
